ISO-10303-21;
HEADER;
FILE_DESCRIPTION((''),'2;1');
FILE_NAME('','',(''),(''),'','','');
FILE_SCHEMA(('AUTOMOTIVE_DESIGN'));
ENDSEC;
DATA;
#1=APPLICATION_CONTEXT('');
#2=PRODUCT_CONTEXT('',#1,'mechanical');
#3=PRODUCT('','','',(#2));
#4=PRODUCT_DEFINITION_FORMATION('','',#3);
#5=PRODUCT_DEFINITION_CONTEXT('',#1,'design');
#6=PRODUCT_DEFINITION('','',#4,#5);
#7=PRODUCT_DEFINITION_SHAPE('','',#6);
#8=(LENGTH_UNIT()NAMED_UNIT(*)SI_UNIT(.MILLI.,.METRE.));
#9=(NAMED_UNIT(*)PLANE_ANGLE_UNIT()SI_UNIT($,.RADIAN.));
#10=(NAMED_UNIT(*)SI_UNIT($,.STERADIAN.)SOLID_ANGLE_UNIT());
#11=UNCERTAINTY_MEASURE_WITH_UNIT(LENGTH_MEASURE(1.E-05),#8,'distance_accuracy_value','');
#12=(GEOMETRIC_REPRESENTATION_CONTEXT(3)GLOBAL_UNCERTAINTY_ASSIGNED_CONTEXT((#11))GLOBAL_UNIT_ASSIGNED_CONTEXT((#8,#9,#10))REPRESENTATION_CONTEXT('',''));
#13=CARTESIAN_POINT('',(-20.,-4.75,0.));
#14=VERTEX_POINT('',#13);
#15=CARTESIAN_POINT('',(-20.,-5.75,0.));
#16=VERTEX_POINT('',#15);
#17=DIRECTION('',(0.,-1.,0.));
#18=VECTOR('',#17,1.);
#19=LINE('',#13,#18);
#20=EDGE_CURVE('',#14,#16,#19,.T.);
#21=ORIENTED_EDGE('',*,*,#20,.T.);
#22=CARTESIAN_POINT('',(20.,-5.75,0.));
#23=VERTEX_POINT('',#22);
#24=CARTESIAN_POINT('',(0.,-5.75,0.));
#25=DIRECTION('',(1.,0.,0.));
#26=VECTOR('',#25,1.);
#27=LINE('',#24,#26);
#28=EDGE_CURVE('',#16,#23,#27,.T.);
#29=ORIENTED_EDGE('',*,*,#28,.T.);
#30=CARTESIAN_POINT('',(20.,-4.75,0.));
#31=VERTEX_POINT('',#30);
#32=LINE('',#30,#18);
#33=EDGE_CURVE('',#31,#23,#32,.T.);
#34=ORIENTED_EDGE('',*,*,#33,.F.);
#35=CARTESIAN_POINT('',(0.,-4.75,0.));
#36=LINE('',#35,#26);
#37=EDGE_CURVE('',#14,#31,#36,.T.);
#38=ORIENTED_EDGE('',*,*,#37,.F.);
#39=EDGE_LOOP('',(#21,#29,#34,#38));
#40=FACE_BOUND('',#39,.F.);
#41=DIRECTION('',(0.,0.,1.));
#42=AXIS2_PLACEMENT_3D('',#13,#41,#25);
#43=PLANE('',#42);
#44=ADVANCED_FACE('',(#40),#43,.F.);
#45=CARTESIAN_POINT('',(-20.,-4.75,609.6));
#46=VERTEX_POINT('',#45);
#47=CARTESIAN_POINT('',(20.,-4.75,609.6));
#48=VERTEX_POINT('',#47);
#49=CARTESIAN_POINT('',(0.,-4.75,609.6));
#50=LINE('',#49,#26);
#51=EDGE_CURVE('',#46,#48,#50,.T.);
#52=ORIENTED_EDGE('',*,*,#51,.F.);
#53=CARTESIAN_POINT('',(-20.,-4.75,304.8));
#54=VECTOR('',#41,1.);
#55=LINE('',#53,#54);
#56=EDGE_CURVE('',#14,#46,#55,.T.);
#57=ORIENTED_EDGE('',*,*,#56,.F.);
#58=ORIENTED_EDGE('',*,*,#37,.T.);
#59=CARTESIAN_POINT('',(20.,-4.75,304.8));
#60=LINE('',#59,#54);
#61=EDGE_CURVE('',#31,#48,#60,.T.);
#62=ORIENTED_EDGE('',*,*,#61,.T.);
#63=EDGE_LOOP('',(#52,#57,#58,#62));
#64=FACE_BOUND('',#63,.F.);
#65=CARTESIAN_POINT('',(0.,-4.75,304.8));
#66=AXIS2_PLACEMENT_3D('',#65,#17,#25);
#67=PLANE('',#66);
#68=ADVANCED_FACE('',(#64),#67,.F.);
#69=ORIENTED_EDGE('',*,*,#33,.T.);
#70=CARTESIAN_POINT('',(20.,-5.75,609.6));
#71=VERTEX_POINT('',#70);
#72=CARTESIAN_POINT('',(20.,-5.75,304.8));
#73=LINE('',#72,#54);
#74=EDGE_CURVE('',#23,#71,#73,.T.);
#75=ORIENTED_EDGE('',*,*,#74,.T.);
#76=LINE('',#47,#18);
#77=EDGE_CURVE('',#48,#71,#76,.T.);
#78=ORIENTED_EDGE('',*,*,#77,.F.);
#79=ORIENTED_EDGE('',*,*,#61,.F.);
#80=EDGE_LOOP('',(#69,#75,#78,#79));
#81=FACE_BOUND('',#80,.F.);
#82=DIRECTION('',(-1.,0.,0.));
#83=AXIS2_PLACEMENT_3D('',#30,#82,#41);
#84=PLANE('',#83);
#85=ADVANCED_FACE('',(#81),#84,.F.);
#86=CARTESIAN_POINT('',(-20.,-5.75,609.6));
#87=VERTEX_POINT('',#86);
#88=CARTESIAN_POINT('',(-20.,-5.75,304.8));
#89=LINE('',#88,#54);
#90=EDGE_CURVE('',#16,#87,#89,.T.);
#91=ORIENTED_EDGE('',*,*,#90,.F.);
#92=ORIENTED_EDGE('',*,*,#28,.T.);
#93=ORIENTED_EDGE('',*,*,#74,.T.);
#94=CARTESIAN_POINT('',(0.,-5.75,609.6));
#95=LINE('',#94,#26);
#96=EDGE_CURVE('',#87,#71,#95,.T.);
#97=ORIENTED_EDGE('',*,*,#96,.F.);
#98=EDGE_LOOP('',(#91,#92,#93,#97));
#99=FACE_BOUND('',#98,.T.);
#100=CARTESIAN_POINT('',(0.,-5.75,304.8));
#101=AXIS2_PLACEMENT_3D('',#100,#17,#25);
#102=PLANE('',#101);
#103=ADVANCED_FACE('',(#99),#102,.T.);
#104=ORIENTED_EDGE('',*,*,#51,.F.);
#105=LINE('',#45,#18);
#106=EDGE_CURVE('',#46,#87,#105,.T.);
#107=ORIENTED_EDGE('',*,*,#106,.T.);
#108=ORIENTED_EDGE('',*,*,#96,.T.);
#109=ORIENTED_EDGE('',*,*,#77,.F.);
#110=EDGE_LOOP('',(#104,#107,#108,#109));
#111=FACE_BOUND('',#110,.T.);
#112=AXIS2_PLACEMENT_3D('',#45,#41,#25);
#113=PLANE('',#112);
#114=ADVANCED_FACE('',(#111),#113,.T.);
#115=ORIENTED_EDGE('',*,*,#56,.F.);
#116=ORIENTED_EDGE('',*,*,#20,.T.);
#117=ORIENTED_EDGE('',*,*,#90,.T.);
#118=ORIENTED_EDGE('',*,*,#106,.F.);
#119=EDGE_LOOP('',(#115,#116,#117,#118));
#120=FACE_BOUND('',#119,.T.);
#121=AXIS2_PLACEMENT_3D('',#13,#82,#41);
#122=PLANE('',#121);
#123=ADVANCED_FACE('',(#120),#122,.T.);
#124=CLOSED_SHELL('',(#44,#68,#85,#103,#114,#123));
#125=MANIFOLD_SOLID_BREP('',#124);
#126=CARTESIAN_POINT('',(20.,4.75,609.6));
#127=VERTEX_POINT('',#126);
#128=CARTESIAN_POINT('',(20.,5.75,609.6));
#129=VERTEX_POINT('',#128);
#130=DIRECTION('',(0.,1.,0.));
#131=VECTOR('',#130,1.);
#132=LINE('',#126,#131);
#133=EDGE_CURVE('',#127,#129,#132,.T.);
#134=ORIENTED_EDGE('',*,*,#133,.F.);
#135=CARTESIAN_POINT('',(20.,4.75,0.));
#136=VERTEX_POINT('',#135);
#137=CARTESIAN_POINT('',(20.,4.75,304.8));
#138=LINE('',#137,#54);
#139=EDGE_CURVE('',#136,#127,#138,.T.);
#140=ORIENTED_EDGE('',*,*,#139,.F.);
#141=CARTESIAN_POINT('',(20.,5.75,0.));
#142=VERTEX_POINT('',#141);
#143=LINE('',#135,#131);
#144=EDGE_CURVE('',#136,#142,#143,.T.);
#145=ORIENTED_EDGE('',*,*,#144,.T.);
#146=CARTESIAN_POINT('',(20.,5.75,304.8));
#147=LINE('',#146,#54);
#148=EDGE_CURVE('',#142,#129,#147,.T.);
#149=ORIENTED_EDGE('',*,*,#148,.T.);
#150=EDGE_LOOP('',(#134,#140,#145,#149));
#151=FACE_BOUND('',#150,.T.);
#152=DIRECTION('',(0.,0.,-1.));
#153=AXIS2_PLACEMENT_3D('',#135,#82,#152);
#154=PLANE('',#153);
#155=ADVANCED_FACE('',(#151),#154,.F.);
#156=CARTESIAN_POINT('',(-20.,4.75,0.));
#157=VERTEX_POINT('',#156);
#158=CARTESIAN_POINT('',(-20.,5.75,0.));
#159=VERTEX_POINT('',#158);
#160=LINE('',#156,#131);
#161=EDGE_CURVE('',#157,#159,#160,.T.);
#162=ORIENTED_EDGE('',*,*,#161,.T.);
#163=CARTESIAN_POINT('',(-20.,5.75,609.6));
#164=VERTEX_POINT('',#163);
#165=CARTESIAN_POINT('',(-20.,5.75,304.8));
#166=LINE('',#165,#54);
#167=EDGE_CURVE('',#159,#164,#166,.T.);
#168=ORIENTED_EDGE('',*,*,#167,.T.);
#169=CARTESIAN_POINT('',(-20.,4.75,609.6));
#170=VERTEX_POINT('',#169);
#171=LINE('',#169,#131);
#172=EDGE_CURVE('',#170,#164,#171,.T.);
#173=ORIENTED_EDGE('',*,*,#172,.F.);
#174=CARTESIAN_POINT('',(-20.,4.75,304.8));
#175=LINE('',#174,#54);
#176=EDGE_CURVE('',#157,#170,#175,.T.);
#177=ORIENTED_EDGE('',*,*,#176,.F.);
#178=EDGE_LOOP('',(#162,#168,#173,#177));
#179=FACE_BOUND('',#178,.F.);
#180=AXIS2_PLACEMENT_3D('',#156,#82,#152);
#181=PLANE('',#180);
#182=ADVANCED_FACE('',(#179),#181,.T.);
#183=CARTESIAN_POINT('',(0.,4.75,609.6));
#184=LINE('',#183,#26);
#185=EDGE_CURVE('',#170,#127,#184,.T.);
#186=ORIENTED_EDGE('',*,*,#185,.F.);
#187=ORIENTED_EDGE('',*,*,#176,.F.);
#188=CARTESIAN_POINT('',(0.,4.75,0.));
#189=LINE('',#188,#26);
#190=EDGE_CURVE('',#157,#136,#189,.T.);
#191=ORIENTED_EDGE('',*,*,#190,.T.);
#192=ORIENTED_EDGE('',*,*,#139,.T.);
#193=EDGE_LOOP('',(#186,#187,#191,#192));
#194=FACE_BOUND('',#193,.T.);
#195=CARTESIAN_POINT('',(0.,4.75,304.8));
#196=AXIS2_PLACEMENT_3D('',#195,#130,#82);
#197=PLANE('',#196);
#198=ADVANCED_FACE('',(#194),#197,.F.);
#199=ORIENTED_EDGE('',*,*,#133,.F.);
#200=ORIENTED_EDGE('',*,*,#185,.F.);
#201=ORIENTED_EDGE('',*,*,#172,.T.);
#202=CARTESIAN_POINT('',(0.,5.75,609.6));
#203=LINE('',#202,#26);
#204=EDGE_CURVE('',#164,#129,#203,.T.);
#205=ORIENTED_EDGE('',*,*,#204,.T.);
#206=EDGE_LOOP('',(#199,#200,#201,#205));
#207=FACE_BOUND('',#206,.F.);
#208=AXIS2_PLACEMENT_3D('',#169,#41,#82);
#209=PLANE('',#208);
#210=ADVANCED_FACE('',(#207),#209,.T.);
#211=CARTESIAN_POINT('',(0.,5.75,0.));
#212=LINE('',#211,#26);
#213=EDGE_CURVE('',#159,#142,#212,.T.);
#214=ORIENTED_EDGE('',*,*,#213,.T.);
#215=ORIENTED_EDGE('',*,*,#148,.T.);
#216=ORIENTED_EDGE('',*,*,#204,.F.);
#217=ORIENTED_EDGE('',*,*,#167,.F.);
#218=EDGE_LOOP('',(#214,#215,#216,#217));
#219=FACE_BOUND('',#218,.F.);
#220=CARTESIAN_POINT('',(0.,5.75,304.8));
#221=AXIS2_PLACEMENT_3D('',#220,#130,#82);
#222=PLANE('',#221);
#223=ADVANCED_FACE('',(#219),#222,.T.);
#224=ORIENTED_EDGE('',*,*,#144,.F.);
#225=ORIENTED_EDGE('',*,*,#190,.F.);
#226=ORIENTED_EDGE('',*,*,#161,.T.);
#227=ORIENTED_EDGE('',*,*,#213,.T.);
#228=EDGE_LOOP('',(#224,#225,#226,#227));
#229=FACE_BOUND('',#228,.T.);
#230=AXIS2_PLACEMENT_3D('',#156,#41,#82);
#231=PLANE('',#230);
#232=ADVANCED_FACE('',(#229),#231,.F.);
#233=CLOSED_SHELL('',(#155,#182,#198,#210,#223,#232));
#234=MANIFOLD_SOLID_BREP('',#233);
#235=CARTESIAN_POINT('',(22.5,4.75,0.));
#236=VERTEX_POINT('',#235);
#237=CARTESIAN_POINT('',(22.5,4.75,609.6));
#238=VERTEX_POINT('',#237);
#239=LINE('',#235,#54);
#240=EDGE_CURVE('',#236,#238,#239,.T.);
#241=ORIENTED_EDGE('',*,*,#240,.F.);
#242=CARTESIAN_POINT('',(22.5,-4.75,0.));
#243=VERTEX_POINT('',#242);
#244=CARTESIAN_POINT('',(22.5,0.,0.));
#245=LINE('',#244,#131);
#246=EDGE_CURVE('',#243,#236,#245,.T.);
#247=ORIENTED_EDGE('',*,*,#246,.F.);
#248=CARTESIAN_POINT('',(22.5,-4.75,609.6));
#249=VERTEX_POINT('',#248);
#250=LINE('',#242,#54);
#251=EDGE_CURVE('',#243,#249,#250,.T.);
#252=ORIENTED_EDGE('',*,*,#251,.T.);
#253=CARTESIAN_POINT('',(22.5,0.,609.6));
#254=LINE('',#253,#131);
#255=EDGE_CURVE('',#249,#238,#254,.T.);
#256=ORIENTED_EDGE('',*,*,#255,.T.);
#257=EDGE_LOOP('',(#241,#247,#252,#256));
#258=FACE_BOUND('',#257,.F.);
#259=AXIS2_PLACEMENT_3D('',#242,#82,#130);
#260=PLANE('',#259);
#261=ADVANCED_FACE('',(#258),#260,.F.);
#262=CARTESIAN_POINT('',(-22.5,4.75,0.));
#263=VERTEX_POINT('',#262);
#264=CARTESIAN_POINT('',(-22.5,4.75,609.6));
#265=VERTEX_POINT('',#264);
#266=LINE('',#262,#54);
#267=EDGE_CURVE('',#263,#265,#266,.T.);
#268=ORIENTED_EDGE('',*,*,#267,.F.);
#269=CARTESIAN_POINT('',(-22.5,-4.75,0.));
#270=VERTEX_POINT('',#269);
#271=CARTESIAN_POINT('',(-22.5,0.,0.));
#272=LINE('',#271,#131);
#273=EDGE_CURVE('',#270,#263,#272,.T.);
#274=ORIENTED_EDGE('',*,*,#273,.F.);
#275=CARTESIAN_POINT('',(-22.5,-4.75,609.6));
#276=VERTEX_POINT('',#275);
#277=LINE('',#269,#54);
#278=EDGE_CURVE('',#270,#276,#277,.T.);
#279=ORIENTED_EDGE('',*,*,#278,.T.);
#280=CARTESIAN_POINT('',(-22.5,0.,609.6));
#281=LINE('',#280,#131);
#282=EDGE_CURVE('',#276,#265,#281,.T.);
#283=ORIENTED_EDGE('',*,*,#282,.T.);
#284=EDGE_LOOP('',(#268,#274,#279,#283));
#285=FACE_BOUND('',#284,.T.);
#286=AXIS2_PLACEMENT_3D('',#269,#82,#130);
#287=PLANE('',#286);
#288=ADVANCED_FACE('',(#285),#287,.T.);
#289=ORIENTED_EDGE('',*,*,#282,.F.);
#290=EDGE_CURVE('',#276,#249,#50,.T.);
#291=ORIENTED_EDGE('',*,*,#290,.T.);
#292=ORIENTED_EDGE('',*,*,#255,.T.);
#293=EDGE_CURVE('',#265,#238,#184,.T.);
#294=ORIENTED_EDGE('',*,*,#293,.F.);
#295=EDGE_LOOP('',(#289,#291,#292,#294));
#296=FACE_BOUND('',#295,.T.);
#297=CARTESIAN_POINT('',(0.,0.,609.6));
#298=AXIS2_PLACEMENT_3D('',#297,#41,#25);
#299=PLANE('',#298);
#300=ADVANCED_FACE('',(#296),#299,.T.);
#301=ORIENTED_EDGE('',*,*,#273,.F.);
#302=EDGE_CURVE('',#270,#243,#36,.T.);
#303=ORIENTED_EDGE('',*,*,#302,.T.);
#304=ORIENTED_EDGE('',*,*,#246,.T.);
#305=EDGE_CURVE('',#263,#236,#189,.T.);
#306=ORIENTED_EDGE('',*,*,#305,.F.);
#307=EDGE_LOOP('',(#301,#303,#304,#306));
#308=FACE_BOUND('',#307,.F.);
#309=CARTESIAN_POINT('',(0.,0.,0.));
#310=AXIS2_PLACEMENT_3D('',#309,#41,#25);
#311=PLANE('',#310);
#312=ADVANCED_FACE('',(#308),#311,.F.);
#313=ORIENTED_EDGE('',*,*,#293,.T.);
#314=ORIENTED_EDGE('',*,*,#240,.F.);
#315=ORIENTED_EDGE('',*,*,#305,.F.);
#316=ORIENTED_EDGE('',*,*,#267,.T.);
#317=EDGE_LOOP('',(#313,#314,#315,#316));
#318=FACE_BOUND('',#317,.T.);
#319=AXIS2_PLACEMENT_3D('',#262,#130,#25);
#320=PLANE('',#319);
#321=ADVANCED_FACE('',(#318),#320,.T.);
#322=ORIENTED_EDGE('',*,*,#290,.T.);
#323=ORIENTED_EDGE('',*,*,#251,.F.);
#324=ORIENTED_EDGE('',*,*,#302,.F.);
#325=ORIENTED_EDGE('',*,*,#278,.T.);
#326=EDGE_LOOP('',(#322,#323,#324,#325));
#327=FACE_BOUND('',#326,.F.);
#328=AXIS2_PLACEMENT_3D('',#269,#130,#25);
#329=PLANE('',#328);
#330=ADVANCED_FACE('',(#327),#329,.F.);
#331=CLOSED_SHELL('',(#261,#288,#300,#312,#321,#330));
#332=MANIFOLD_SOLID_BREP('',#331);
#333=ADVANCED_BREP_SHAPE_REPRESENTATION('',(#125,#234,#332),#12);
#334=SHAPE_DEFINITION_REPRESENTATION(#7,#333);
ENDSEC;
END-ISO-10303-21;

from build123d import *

# Parameters (mm, degrees)
F0_W     = 45
F0_H     = 9.5
F1_DEPTH = 609.6
F2_W     = 40
F2_H     = 609.6
F3_DEPTH = 1


with BuildPart() as f1:
    # F0 (on Top) → F1 (new body)
    with BuildSketch(Plane.XY):
        Rectangle(F0_W, F0_H)
    extrude(amount=F1_DEPTH)


with BuildPart() as f3:
    # F2 (on face) → F3 (new body)
    with BuildSketch(Plane.XZ.offset(4.75)):
        with Locations((0, 304.8)):
            Rectangle(F2_W, F2_H)
    extrude(amount=F3_DEPTH)


with BuildPart() as f4_1:
    # F4: instance of F3
    add(f3.part.mirror(Plane.XZ))


solid = Compound([f1.part, f3.part, f4_1.part])
